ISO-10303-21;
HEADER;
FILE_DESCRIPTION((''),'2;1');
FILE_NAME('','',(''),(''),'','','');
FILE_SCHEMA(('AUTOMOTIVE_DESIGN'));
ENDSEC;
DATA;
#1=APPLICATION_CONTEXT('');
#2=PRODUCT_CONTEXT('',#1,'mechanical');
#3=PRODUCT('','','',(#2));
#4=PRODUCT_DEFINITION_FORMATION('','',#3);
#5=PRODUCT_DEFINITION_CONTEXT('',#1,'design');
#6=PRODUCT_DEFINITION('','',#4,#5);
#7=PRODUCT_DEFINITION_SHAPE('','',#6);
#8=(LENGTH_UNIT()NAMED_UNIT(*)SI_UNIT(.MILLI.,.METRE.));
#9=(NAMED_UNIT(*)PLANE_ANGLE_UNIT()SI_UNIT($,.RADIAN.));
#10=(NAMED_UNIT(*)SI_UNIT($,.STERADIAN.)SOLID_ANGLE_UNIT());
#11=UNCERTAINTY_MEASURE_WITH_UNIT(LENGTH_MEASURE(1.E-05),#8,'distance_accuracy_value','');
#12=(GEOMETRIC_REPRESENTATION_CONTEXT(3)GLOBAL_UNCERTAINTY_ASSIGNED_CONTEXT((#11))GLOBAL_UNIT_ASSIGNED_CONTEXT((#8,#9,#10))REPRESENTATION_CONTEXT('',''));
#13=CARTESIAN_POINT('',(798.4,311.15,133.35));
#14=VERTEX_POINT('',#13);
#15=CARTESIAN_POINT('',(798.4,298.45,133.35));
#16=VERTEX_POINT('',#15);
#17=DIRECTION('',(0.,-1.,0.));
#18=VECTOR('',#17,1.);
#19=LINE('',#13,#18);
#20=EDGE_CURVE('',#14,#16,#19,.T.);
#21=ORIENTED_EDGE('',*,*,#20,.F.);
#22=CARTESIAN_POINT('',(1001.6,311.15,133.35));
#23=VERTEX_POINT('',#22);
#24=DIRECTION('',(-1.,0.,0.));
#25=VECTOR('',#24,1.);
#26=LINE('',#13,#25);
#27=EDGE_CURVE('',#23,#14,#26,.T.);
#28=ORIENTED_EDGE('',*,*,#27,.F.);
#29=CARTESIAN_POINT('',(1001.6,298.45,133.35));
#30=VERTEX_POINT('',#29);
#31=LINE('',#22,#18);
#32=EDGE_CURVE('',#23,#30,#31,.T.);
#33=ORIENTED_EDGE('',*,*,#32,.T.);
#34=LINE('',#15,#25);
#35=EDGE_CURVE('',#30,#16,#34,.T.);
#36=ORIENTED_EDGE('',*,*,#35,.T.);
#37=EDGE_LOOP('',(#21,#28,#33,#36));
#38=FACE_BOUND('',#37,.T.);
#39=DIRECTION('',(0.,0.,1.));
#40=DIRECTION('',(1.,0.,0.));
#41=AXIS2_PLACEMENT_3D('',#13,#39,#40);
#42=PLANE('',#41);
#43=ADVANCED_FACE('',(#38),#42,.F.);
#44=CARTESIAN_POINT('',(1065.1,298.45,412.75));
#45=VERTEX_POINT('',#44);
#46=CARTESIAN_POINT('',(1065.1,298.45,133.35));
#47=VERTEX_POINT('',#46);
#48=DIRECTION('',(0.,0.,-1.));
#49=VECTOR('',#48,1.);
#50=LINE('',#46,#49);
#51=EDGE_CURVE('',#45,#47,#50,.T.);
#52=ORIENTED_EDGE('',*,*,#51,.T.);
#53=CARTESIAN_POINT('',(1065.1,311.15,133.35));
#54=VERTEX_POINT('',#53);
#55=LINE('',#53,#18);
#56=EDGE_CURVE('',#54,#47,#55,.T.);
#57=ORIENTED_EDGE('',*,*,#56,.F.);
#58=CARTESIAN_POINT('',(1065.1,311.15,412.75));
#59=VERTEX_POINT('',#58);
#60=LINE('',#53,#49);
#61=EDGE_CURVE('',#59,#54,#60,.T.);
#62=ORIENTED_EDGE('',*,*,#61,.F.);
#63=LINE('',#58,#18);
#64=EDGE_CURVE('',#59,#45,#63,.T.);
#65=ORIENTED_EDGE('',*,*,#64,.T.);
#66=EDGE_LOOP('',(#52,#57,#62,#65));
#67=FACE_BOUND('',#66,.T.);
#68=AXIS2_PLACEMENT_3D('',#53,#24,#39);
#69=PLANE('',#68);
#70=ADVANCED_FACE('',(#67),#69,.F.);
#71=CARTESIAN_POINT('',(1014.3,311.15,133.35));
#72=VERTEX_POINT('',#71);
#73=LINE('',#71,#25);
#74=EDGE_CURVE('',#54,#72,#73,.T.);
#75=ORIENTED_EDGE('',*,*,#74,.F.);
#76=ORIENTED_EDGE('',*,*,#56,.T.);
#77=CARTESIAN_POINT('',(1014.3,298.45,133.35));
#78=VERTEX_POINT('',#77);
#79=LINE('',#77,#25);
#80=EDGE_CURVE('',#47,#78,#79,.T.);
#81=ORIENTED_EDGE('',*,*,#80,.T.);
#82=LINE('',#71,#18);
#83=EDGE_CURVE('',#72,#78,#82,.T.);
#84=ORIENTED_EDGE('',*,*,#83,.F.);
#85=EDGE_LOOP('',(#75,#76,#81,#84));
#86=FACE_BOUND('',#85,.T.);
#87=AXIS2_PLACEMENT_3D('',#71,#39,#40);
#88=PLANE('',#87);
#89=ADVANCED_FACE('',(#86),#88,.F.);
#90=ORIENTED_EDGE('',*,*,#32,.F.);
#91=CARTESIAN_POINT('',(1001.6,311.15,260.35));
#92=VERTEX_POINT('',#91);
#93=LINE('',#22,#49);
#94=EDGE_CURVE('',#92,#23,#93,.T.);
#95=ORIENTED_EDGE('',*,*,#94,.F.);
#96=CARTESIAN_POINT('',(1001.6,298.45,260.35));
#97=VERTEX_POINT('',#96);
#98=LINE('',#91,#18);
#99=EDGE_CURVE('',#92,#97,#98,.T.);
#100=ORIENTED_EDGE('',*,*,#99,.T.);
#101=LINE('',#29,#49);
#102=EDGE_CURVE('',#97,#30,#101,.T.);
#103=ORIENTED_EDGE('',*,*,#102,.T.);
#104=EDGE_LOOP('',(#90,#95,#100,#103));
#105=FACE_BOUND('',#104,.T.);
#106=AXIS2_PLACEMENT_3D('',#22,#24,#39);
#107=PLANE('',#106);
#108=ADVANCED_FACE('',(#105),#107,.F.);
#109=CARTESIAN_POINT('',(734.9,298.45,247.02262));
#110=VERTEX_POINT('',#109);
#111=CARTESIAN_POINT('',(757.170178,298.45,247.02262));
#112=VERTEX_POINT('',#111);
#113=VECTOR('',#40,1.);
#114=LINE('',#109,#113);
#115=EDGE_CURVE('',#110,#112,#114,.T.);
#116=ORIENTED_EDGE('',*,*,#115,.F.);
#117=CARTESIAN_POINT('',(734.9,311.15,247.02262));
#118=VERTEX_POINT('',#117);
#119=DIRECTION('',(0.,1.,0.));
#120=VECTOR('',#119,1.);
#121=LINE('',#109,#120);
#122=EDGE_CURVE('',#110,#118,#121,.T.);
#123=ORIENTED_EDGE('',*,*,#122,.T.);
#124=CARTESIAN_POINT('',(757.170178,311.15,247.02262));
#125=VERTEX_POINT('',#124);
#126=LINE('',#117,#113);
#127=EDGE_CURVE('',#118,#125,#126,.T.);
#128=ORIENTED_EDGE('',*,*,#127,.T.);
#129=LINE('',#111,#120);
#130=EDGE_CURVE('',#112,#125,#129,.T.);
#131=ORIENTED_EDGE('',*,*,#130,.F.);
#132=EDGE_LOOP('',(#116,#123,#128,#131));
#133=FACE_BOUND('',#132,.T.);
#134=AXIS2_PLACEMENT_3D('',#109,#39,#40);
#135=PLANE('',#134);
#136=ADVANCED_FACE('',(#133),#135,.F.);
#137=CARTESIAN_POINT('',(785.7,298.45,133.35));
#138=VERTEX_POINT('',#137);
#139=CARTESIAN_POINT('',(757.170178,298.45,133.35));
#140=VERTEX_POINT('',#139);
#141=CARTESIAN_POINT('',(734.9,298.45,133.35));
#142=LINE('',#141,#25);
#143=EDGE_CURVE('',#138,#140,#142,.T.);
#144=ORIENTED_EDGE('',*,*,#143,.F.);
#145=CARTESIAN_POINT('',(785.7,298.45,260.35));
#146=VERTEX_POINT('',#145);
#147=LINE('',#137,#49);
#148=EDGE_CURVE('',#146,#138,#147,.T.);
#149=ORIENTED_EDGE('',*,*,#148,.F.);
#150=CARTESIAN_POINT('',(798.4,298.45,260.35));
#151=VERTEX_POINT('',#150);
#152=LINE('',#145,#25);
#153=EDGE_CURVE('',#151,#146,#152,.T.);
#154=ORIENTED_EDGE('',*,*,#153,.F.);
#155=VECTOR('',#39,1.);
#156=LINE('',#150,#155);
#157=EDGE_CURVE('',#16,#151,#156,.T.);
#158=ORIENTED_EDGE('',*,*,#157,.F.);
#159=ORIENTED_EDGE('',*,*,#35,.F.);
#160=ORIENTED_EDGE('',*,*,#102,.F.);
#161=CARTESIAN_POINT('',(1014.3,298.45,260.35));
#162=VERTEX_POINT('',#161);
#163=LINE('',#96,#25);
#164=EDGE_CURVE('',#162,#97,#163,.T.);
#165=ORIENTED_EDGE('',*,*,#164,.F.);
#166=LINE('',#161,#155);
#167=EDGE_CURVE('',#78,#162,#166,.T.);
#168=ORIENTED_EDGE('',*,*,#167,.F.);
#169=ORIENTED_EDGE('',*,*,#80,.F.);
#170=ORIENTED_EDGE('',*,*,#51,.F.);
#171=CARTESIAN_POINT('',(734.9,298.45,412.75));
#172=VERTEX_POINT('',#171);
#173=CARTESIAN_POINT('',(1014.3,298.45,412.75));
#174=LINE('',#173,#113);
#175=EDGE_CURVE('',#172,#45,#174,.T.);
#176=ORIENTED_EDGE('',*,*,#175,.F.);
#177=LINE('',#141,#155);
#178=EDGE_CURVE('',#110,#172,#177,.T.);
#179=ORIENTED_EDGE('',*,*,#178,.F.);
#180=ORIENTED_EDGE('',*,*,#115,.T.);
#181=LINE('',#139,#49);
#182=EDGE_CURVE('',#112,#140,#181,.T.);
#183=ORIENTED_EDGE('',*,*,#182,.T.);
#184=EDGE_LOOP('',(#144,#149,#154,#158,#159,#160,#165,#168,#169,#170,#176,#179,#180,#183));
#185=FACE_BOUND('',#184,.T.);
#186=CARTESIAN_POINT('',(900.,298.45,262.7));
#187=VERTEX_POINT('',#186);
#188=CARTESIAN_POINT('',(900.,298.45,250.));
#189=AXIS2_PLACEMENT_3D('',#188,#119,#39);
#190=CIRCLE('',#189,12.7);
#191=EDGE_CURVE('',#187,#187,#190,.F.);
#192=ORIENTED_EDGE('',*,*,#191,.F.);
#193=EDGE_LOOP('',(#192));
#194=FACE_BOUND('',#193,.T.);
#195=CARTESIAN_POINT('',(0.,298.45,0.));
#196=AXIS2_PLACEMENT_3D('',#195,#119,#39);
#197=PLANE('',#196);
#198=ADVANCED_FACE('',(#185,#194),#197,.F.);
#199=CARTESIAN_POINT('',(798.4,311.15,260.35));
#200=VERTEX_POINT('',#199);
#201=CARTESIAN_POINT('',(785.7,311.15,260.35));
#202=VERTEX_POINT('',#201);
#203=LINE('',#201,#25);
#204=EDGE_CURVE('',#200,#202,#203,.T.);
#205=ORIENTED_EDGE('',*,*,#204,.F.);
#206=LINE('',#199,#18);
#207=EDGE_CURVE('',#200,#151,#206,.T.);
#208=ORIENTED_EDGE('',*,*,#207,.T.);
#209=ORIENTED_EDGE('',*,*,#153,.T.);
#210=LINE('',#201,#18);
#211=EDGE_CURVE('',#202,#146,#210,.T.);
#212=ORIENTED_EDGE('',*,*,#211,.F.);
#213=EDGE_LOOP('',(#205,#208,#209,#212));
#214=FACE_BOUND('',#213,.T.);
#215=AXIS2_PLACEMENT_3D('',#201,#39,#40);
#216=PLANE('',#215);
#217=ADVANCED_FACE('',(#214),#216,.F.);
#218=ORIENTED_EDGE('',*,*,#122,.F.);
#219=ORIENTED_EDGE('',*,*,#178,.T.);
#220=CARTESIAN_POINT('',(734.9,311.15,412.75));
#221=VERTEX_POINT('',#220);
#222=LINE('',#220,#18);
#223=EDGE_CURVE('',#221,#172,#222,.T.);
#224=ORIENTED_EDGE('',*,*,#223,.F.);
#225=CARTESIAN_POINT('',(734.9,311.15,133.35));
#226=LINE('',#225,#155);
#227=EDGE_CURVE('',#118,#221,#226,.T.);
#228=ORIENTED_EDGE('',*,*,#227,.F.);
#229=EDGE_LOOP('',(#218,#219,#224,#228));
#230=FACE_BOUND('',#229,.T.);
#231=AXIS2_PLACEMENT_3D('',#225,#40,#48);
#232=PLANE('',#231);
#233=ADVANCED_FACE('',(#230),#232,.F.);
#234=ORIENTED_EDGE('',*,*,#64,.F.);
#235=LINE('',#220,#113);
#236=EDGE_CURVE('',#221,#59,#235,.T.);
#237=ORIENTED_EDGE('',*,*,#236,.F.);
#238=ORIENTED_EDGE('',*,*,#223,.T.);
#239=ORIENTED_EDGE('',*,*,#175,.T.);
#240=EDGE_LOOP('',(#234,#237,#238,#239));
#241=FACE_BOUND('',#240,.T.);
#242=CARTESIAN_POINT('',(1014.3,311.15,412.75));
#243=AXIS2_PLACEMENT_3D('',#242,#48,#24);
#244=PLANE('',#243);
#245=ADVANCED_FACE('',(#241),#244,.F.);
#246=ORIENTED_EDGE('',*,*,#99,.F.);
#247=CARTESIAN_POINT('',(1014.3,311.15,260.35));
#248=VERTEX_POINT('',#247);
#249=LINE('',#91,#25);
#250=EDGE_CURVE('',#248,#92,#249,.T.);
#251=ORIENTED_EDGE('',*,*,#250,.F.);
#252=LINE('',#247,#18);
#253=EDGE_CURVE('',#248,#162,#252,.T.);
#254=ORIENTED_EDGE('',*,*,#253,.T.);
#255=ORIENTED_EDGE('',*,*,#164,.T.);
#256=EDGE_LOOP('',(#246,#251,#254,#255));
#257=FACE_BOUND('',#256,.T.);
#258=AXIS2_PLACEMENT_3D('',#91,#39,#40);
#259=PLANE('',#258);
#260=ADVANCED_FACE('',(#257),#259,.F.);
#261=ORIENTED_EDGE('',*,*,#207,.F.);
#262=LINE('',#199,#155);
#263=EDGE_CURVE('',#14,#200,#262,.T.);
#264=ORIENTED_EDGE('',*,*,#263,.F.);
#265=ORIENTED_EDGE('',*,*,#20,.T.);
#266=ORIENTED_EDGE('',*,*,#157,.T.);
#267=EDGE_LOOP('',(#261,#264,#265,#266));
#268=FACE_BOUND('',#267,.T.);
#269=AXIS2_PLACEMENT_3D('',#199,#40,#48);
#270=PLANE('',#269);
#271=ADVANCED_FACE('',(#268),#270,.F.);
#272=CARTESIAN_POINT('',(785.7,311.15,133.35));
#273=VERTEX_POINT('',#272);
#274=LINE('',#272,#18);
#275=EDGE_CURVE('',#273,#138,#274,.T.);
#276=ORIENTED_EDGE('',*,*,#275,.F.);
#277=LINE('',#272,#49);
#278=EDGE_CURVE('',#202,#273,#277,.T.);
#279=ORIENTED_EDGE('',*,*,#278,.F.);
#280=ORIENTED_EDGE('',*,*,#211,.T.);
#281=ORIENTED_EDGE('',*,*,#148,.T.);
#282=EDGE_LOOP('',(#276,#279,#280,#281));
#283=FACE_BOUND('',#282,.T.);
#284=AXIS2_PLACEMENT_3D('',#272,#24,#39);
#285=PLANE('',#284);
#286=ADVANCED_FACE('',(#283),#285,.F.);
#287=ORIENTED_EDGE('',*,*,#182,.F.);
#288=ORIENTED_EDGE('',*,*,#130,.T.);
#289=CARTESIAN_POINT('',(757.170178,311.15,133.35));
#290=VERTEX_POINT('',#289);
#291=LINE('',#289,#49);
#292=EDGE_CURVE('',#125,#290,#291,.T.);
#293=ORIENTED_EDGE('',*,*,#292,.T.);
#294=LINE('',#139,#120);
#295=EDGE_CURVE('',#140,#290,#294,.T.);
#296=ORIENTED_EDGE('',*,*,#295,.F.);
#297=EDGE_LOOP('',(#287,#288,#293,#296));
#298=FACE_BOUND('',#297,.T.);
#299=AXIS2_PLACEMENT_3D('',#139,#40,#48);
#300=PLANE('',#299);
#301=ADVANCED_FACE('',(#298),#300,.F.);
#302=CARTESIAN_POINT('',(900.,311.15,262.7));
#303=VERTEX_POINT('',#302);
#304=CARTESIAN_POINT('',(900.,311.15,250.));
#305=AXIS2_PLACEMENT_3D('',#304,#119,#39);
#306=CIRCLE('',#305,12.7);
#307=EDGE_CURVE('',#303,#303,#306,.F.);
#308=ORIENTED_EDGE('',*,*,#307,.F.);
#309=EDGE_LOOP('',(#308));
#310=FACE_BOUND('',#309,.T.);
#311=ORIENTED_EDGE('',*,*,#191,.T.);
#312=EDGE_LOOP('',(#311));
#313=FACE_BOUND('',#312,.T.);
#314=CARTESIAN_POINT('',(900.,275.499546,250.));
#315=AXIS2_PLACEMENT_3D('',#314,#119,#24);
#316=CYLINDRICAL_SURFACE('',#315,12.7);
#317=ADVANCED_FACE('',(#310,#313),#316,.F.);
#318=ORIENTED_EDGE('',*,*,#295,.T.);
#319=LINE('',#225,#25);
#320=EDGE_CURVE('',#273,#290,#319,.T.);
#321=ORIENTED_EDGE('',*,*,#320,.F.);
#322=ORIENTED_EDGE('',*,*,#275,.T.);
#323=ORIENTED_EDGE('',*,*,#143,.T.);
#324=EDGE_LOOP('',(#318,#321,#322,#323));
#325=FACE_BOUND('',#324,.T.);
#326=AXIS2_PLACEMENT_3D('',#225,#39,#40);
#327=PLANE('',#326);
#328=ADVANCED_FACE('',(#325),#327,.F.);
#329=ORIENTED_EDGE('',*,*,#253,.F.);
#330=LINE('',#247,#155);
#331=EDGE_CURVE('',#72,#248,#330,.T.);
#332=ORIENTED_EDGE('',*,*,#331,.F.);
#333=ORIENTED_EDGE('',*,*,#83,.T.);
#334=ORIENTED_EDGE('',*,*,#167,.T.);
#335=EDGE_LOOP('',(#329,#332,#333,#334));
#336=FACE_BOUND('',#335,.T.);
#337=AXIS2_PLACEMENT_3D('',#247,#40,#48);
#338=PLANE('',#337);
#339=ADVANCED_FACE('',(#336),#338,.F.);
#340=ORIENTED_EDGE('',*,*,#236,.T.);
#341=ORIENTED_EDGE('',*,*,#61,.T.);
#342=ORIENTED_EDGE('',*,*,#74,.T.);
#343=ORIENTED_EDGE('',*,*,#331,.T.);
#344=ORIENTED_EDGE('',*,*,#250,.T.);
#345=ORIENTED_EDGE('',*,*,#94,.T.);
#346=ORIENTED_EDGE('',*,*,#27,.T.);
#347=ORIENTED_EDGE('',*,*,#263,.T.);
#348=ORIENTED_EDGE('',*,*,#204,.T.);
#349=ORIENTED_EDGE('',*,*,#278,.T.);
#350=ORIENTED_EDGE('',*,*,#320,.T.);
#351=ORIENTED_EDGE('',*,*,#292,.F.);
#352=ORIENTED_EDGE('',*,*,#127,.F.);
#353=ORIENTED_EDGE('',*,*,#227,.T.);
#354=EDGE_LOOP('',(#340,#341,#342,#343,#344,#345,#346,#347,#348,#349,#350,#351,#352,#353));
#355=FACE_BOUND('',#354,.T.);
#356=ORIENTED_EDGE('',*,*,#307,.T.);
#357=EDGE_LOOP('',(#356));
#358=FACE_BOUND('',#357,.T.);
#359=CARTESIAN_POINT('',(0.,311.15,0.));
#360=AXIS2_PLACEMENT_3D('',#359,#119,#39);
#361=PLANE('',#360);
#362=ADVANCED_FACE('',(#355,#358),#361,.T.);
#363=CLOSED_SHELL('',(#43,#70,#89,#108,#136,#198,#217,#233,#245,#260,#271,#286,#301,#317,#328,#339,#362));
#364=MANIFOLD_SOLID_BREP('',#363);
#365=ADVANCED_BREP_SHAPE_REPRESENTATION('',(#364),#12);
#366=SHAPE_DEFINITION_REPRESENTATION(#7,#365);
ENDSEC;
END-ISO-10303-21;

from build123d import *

# Parameters (mm, degrees)
BOSS_EXTRUDE1_DEPTH = 6.35
CAVITY1_START       = 298.45
CAVITY1_OUTLINE_R   = 12.7
CAVITY1_DEPTH       = 12.7
CAVITY1_START_2     = 720.91620239
CAVITY1_2_DEPTH     = 22.43918751
SKETCH2_W           = 22.270177668
SKETCH2_H           = 113.672619585
CUT_EXTRUDE1_DEPTH  = 1143.349273427


# Read off the part's stored shape, not the designer's step: Cavity1
with BuildPart() as part:
    # Sketch1 → Boss-Extrude1 (new, symmetric)
    with BuildSketch(Plane(origin=(0, 304.8, 0), x_dir=(1, 0, 0), z_dir=(0, 1, 0))):
        Polygon((798.4, -133.35), (1001.6, -133.35), (1001.6, -260.35), (1014.3, -260.35), (1014.3, -133.35), (1065.1, -133.35), (1065.1, -412.75), (1014.3, -412.75), (1001.6, -412.75), (798.4, -412.75), (785.7, -412.75), (734.9, -412.75), (734.9, -133.35), (785.7, -133.35), (785.7, -260.35), (798.4, -260.35), align=None)
    extrude(amount=BOSS_EXTRUDE1_DEPTH, both=True)

    # Cavity1 outline → Cavity1 (cut)
    with BuildSketch(Plane(origin=(0, 0, 0), x_dir=(1, 0, 0), z_dir=(0, 1, 0)).offset(CAVITY1_START)):
        with Locations((900, -250)):
            Circle(CAVITY1_OUTLINE_R)
    extrude(amount=CAVITY1_DEPTH, mode=Mode.SUBTRACT)

    # Cavity1 2 outline → Cavity1 2 (cut)
    with BuildSketch(Plane(origin=(0, 0, 0), x_dir=(0.7149295353100829, -0.698752516444498, 0.02491345627949748), z_dir=(0.6991965099607612, 0.7144755512387372, -0.025474048378572107)).offset(CAVITY1_START_2)):
        with BuildLine():
            Line((312, -255.374549574), (314.076314529, -255.435688643))
            ThreePointArc((314.076314529, -255.435688643), (327.146171675, -242.424687318), (313.444242413, -230.081087528))
            Line((313.444242413, -230.081087528), (312, -230.195835843))
            Line((312, -230.195835843), (312, -255.374549574))
        make_face()
    extrude(amount=CAVITY1_2_DEPTH, mode=Mode.SUBTRACT)

    # Sketch2 → Cut-Extrude1 (cut, through all)
    with BuildSketch(Plane(origin=(0, 311.15, 0), x_dir=(1, 0, 0), z_dir=(0, 1, 0))):
        with Locations((746.035088834, -190.186309793)):
            Rectangle(SKETCH2_W, SKETCH2_H)
    extrude(amount=-CUT_EXTRUDE1_DEPTH, mode=Mode.SUBTRACT)


solid = part.part
